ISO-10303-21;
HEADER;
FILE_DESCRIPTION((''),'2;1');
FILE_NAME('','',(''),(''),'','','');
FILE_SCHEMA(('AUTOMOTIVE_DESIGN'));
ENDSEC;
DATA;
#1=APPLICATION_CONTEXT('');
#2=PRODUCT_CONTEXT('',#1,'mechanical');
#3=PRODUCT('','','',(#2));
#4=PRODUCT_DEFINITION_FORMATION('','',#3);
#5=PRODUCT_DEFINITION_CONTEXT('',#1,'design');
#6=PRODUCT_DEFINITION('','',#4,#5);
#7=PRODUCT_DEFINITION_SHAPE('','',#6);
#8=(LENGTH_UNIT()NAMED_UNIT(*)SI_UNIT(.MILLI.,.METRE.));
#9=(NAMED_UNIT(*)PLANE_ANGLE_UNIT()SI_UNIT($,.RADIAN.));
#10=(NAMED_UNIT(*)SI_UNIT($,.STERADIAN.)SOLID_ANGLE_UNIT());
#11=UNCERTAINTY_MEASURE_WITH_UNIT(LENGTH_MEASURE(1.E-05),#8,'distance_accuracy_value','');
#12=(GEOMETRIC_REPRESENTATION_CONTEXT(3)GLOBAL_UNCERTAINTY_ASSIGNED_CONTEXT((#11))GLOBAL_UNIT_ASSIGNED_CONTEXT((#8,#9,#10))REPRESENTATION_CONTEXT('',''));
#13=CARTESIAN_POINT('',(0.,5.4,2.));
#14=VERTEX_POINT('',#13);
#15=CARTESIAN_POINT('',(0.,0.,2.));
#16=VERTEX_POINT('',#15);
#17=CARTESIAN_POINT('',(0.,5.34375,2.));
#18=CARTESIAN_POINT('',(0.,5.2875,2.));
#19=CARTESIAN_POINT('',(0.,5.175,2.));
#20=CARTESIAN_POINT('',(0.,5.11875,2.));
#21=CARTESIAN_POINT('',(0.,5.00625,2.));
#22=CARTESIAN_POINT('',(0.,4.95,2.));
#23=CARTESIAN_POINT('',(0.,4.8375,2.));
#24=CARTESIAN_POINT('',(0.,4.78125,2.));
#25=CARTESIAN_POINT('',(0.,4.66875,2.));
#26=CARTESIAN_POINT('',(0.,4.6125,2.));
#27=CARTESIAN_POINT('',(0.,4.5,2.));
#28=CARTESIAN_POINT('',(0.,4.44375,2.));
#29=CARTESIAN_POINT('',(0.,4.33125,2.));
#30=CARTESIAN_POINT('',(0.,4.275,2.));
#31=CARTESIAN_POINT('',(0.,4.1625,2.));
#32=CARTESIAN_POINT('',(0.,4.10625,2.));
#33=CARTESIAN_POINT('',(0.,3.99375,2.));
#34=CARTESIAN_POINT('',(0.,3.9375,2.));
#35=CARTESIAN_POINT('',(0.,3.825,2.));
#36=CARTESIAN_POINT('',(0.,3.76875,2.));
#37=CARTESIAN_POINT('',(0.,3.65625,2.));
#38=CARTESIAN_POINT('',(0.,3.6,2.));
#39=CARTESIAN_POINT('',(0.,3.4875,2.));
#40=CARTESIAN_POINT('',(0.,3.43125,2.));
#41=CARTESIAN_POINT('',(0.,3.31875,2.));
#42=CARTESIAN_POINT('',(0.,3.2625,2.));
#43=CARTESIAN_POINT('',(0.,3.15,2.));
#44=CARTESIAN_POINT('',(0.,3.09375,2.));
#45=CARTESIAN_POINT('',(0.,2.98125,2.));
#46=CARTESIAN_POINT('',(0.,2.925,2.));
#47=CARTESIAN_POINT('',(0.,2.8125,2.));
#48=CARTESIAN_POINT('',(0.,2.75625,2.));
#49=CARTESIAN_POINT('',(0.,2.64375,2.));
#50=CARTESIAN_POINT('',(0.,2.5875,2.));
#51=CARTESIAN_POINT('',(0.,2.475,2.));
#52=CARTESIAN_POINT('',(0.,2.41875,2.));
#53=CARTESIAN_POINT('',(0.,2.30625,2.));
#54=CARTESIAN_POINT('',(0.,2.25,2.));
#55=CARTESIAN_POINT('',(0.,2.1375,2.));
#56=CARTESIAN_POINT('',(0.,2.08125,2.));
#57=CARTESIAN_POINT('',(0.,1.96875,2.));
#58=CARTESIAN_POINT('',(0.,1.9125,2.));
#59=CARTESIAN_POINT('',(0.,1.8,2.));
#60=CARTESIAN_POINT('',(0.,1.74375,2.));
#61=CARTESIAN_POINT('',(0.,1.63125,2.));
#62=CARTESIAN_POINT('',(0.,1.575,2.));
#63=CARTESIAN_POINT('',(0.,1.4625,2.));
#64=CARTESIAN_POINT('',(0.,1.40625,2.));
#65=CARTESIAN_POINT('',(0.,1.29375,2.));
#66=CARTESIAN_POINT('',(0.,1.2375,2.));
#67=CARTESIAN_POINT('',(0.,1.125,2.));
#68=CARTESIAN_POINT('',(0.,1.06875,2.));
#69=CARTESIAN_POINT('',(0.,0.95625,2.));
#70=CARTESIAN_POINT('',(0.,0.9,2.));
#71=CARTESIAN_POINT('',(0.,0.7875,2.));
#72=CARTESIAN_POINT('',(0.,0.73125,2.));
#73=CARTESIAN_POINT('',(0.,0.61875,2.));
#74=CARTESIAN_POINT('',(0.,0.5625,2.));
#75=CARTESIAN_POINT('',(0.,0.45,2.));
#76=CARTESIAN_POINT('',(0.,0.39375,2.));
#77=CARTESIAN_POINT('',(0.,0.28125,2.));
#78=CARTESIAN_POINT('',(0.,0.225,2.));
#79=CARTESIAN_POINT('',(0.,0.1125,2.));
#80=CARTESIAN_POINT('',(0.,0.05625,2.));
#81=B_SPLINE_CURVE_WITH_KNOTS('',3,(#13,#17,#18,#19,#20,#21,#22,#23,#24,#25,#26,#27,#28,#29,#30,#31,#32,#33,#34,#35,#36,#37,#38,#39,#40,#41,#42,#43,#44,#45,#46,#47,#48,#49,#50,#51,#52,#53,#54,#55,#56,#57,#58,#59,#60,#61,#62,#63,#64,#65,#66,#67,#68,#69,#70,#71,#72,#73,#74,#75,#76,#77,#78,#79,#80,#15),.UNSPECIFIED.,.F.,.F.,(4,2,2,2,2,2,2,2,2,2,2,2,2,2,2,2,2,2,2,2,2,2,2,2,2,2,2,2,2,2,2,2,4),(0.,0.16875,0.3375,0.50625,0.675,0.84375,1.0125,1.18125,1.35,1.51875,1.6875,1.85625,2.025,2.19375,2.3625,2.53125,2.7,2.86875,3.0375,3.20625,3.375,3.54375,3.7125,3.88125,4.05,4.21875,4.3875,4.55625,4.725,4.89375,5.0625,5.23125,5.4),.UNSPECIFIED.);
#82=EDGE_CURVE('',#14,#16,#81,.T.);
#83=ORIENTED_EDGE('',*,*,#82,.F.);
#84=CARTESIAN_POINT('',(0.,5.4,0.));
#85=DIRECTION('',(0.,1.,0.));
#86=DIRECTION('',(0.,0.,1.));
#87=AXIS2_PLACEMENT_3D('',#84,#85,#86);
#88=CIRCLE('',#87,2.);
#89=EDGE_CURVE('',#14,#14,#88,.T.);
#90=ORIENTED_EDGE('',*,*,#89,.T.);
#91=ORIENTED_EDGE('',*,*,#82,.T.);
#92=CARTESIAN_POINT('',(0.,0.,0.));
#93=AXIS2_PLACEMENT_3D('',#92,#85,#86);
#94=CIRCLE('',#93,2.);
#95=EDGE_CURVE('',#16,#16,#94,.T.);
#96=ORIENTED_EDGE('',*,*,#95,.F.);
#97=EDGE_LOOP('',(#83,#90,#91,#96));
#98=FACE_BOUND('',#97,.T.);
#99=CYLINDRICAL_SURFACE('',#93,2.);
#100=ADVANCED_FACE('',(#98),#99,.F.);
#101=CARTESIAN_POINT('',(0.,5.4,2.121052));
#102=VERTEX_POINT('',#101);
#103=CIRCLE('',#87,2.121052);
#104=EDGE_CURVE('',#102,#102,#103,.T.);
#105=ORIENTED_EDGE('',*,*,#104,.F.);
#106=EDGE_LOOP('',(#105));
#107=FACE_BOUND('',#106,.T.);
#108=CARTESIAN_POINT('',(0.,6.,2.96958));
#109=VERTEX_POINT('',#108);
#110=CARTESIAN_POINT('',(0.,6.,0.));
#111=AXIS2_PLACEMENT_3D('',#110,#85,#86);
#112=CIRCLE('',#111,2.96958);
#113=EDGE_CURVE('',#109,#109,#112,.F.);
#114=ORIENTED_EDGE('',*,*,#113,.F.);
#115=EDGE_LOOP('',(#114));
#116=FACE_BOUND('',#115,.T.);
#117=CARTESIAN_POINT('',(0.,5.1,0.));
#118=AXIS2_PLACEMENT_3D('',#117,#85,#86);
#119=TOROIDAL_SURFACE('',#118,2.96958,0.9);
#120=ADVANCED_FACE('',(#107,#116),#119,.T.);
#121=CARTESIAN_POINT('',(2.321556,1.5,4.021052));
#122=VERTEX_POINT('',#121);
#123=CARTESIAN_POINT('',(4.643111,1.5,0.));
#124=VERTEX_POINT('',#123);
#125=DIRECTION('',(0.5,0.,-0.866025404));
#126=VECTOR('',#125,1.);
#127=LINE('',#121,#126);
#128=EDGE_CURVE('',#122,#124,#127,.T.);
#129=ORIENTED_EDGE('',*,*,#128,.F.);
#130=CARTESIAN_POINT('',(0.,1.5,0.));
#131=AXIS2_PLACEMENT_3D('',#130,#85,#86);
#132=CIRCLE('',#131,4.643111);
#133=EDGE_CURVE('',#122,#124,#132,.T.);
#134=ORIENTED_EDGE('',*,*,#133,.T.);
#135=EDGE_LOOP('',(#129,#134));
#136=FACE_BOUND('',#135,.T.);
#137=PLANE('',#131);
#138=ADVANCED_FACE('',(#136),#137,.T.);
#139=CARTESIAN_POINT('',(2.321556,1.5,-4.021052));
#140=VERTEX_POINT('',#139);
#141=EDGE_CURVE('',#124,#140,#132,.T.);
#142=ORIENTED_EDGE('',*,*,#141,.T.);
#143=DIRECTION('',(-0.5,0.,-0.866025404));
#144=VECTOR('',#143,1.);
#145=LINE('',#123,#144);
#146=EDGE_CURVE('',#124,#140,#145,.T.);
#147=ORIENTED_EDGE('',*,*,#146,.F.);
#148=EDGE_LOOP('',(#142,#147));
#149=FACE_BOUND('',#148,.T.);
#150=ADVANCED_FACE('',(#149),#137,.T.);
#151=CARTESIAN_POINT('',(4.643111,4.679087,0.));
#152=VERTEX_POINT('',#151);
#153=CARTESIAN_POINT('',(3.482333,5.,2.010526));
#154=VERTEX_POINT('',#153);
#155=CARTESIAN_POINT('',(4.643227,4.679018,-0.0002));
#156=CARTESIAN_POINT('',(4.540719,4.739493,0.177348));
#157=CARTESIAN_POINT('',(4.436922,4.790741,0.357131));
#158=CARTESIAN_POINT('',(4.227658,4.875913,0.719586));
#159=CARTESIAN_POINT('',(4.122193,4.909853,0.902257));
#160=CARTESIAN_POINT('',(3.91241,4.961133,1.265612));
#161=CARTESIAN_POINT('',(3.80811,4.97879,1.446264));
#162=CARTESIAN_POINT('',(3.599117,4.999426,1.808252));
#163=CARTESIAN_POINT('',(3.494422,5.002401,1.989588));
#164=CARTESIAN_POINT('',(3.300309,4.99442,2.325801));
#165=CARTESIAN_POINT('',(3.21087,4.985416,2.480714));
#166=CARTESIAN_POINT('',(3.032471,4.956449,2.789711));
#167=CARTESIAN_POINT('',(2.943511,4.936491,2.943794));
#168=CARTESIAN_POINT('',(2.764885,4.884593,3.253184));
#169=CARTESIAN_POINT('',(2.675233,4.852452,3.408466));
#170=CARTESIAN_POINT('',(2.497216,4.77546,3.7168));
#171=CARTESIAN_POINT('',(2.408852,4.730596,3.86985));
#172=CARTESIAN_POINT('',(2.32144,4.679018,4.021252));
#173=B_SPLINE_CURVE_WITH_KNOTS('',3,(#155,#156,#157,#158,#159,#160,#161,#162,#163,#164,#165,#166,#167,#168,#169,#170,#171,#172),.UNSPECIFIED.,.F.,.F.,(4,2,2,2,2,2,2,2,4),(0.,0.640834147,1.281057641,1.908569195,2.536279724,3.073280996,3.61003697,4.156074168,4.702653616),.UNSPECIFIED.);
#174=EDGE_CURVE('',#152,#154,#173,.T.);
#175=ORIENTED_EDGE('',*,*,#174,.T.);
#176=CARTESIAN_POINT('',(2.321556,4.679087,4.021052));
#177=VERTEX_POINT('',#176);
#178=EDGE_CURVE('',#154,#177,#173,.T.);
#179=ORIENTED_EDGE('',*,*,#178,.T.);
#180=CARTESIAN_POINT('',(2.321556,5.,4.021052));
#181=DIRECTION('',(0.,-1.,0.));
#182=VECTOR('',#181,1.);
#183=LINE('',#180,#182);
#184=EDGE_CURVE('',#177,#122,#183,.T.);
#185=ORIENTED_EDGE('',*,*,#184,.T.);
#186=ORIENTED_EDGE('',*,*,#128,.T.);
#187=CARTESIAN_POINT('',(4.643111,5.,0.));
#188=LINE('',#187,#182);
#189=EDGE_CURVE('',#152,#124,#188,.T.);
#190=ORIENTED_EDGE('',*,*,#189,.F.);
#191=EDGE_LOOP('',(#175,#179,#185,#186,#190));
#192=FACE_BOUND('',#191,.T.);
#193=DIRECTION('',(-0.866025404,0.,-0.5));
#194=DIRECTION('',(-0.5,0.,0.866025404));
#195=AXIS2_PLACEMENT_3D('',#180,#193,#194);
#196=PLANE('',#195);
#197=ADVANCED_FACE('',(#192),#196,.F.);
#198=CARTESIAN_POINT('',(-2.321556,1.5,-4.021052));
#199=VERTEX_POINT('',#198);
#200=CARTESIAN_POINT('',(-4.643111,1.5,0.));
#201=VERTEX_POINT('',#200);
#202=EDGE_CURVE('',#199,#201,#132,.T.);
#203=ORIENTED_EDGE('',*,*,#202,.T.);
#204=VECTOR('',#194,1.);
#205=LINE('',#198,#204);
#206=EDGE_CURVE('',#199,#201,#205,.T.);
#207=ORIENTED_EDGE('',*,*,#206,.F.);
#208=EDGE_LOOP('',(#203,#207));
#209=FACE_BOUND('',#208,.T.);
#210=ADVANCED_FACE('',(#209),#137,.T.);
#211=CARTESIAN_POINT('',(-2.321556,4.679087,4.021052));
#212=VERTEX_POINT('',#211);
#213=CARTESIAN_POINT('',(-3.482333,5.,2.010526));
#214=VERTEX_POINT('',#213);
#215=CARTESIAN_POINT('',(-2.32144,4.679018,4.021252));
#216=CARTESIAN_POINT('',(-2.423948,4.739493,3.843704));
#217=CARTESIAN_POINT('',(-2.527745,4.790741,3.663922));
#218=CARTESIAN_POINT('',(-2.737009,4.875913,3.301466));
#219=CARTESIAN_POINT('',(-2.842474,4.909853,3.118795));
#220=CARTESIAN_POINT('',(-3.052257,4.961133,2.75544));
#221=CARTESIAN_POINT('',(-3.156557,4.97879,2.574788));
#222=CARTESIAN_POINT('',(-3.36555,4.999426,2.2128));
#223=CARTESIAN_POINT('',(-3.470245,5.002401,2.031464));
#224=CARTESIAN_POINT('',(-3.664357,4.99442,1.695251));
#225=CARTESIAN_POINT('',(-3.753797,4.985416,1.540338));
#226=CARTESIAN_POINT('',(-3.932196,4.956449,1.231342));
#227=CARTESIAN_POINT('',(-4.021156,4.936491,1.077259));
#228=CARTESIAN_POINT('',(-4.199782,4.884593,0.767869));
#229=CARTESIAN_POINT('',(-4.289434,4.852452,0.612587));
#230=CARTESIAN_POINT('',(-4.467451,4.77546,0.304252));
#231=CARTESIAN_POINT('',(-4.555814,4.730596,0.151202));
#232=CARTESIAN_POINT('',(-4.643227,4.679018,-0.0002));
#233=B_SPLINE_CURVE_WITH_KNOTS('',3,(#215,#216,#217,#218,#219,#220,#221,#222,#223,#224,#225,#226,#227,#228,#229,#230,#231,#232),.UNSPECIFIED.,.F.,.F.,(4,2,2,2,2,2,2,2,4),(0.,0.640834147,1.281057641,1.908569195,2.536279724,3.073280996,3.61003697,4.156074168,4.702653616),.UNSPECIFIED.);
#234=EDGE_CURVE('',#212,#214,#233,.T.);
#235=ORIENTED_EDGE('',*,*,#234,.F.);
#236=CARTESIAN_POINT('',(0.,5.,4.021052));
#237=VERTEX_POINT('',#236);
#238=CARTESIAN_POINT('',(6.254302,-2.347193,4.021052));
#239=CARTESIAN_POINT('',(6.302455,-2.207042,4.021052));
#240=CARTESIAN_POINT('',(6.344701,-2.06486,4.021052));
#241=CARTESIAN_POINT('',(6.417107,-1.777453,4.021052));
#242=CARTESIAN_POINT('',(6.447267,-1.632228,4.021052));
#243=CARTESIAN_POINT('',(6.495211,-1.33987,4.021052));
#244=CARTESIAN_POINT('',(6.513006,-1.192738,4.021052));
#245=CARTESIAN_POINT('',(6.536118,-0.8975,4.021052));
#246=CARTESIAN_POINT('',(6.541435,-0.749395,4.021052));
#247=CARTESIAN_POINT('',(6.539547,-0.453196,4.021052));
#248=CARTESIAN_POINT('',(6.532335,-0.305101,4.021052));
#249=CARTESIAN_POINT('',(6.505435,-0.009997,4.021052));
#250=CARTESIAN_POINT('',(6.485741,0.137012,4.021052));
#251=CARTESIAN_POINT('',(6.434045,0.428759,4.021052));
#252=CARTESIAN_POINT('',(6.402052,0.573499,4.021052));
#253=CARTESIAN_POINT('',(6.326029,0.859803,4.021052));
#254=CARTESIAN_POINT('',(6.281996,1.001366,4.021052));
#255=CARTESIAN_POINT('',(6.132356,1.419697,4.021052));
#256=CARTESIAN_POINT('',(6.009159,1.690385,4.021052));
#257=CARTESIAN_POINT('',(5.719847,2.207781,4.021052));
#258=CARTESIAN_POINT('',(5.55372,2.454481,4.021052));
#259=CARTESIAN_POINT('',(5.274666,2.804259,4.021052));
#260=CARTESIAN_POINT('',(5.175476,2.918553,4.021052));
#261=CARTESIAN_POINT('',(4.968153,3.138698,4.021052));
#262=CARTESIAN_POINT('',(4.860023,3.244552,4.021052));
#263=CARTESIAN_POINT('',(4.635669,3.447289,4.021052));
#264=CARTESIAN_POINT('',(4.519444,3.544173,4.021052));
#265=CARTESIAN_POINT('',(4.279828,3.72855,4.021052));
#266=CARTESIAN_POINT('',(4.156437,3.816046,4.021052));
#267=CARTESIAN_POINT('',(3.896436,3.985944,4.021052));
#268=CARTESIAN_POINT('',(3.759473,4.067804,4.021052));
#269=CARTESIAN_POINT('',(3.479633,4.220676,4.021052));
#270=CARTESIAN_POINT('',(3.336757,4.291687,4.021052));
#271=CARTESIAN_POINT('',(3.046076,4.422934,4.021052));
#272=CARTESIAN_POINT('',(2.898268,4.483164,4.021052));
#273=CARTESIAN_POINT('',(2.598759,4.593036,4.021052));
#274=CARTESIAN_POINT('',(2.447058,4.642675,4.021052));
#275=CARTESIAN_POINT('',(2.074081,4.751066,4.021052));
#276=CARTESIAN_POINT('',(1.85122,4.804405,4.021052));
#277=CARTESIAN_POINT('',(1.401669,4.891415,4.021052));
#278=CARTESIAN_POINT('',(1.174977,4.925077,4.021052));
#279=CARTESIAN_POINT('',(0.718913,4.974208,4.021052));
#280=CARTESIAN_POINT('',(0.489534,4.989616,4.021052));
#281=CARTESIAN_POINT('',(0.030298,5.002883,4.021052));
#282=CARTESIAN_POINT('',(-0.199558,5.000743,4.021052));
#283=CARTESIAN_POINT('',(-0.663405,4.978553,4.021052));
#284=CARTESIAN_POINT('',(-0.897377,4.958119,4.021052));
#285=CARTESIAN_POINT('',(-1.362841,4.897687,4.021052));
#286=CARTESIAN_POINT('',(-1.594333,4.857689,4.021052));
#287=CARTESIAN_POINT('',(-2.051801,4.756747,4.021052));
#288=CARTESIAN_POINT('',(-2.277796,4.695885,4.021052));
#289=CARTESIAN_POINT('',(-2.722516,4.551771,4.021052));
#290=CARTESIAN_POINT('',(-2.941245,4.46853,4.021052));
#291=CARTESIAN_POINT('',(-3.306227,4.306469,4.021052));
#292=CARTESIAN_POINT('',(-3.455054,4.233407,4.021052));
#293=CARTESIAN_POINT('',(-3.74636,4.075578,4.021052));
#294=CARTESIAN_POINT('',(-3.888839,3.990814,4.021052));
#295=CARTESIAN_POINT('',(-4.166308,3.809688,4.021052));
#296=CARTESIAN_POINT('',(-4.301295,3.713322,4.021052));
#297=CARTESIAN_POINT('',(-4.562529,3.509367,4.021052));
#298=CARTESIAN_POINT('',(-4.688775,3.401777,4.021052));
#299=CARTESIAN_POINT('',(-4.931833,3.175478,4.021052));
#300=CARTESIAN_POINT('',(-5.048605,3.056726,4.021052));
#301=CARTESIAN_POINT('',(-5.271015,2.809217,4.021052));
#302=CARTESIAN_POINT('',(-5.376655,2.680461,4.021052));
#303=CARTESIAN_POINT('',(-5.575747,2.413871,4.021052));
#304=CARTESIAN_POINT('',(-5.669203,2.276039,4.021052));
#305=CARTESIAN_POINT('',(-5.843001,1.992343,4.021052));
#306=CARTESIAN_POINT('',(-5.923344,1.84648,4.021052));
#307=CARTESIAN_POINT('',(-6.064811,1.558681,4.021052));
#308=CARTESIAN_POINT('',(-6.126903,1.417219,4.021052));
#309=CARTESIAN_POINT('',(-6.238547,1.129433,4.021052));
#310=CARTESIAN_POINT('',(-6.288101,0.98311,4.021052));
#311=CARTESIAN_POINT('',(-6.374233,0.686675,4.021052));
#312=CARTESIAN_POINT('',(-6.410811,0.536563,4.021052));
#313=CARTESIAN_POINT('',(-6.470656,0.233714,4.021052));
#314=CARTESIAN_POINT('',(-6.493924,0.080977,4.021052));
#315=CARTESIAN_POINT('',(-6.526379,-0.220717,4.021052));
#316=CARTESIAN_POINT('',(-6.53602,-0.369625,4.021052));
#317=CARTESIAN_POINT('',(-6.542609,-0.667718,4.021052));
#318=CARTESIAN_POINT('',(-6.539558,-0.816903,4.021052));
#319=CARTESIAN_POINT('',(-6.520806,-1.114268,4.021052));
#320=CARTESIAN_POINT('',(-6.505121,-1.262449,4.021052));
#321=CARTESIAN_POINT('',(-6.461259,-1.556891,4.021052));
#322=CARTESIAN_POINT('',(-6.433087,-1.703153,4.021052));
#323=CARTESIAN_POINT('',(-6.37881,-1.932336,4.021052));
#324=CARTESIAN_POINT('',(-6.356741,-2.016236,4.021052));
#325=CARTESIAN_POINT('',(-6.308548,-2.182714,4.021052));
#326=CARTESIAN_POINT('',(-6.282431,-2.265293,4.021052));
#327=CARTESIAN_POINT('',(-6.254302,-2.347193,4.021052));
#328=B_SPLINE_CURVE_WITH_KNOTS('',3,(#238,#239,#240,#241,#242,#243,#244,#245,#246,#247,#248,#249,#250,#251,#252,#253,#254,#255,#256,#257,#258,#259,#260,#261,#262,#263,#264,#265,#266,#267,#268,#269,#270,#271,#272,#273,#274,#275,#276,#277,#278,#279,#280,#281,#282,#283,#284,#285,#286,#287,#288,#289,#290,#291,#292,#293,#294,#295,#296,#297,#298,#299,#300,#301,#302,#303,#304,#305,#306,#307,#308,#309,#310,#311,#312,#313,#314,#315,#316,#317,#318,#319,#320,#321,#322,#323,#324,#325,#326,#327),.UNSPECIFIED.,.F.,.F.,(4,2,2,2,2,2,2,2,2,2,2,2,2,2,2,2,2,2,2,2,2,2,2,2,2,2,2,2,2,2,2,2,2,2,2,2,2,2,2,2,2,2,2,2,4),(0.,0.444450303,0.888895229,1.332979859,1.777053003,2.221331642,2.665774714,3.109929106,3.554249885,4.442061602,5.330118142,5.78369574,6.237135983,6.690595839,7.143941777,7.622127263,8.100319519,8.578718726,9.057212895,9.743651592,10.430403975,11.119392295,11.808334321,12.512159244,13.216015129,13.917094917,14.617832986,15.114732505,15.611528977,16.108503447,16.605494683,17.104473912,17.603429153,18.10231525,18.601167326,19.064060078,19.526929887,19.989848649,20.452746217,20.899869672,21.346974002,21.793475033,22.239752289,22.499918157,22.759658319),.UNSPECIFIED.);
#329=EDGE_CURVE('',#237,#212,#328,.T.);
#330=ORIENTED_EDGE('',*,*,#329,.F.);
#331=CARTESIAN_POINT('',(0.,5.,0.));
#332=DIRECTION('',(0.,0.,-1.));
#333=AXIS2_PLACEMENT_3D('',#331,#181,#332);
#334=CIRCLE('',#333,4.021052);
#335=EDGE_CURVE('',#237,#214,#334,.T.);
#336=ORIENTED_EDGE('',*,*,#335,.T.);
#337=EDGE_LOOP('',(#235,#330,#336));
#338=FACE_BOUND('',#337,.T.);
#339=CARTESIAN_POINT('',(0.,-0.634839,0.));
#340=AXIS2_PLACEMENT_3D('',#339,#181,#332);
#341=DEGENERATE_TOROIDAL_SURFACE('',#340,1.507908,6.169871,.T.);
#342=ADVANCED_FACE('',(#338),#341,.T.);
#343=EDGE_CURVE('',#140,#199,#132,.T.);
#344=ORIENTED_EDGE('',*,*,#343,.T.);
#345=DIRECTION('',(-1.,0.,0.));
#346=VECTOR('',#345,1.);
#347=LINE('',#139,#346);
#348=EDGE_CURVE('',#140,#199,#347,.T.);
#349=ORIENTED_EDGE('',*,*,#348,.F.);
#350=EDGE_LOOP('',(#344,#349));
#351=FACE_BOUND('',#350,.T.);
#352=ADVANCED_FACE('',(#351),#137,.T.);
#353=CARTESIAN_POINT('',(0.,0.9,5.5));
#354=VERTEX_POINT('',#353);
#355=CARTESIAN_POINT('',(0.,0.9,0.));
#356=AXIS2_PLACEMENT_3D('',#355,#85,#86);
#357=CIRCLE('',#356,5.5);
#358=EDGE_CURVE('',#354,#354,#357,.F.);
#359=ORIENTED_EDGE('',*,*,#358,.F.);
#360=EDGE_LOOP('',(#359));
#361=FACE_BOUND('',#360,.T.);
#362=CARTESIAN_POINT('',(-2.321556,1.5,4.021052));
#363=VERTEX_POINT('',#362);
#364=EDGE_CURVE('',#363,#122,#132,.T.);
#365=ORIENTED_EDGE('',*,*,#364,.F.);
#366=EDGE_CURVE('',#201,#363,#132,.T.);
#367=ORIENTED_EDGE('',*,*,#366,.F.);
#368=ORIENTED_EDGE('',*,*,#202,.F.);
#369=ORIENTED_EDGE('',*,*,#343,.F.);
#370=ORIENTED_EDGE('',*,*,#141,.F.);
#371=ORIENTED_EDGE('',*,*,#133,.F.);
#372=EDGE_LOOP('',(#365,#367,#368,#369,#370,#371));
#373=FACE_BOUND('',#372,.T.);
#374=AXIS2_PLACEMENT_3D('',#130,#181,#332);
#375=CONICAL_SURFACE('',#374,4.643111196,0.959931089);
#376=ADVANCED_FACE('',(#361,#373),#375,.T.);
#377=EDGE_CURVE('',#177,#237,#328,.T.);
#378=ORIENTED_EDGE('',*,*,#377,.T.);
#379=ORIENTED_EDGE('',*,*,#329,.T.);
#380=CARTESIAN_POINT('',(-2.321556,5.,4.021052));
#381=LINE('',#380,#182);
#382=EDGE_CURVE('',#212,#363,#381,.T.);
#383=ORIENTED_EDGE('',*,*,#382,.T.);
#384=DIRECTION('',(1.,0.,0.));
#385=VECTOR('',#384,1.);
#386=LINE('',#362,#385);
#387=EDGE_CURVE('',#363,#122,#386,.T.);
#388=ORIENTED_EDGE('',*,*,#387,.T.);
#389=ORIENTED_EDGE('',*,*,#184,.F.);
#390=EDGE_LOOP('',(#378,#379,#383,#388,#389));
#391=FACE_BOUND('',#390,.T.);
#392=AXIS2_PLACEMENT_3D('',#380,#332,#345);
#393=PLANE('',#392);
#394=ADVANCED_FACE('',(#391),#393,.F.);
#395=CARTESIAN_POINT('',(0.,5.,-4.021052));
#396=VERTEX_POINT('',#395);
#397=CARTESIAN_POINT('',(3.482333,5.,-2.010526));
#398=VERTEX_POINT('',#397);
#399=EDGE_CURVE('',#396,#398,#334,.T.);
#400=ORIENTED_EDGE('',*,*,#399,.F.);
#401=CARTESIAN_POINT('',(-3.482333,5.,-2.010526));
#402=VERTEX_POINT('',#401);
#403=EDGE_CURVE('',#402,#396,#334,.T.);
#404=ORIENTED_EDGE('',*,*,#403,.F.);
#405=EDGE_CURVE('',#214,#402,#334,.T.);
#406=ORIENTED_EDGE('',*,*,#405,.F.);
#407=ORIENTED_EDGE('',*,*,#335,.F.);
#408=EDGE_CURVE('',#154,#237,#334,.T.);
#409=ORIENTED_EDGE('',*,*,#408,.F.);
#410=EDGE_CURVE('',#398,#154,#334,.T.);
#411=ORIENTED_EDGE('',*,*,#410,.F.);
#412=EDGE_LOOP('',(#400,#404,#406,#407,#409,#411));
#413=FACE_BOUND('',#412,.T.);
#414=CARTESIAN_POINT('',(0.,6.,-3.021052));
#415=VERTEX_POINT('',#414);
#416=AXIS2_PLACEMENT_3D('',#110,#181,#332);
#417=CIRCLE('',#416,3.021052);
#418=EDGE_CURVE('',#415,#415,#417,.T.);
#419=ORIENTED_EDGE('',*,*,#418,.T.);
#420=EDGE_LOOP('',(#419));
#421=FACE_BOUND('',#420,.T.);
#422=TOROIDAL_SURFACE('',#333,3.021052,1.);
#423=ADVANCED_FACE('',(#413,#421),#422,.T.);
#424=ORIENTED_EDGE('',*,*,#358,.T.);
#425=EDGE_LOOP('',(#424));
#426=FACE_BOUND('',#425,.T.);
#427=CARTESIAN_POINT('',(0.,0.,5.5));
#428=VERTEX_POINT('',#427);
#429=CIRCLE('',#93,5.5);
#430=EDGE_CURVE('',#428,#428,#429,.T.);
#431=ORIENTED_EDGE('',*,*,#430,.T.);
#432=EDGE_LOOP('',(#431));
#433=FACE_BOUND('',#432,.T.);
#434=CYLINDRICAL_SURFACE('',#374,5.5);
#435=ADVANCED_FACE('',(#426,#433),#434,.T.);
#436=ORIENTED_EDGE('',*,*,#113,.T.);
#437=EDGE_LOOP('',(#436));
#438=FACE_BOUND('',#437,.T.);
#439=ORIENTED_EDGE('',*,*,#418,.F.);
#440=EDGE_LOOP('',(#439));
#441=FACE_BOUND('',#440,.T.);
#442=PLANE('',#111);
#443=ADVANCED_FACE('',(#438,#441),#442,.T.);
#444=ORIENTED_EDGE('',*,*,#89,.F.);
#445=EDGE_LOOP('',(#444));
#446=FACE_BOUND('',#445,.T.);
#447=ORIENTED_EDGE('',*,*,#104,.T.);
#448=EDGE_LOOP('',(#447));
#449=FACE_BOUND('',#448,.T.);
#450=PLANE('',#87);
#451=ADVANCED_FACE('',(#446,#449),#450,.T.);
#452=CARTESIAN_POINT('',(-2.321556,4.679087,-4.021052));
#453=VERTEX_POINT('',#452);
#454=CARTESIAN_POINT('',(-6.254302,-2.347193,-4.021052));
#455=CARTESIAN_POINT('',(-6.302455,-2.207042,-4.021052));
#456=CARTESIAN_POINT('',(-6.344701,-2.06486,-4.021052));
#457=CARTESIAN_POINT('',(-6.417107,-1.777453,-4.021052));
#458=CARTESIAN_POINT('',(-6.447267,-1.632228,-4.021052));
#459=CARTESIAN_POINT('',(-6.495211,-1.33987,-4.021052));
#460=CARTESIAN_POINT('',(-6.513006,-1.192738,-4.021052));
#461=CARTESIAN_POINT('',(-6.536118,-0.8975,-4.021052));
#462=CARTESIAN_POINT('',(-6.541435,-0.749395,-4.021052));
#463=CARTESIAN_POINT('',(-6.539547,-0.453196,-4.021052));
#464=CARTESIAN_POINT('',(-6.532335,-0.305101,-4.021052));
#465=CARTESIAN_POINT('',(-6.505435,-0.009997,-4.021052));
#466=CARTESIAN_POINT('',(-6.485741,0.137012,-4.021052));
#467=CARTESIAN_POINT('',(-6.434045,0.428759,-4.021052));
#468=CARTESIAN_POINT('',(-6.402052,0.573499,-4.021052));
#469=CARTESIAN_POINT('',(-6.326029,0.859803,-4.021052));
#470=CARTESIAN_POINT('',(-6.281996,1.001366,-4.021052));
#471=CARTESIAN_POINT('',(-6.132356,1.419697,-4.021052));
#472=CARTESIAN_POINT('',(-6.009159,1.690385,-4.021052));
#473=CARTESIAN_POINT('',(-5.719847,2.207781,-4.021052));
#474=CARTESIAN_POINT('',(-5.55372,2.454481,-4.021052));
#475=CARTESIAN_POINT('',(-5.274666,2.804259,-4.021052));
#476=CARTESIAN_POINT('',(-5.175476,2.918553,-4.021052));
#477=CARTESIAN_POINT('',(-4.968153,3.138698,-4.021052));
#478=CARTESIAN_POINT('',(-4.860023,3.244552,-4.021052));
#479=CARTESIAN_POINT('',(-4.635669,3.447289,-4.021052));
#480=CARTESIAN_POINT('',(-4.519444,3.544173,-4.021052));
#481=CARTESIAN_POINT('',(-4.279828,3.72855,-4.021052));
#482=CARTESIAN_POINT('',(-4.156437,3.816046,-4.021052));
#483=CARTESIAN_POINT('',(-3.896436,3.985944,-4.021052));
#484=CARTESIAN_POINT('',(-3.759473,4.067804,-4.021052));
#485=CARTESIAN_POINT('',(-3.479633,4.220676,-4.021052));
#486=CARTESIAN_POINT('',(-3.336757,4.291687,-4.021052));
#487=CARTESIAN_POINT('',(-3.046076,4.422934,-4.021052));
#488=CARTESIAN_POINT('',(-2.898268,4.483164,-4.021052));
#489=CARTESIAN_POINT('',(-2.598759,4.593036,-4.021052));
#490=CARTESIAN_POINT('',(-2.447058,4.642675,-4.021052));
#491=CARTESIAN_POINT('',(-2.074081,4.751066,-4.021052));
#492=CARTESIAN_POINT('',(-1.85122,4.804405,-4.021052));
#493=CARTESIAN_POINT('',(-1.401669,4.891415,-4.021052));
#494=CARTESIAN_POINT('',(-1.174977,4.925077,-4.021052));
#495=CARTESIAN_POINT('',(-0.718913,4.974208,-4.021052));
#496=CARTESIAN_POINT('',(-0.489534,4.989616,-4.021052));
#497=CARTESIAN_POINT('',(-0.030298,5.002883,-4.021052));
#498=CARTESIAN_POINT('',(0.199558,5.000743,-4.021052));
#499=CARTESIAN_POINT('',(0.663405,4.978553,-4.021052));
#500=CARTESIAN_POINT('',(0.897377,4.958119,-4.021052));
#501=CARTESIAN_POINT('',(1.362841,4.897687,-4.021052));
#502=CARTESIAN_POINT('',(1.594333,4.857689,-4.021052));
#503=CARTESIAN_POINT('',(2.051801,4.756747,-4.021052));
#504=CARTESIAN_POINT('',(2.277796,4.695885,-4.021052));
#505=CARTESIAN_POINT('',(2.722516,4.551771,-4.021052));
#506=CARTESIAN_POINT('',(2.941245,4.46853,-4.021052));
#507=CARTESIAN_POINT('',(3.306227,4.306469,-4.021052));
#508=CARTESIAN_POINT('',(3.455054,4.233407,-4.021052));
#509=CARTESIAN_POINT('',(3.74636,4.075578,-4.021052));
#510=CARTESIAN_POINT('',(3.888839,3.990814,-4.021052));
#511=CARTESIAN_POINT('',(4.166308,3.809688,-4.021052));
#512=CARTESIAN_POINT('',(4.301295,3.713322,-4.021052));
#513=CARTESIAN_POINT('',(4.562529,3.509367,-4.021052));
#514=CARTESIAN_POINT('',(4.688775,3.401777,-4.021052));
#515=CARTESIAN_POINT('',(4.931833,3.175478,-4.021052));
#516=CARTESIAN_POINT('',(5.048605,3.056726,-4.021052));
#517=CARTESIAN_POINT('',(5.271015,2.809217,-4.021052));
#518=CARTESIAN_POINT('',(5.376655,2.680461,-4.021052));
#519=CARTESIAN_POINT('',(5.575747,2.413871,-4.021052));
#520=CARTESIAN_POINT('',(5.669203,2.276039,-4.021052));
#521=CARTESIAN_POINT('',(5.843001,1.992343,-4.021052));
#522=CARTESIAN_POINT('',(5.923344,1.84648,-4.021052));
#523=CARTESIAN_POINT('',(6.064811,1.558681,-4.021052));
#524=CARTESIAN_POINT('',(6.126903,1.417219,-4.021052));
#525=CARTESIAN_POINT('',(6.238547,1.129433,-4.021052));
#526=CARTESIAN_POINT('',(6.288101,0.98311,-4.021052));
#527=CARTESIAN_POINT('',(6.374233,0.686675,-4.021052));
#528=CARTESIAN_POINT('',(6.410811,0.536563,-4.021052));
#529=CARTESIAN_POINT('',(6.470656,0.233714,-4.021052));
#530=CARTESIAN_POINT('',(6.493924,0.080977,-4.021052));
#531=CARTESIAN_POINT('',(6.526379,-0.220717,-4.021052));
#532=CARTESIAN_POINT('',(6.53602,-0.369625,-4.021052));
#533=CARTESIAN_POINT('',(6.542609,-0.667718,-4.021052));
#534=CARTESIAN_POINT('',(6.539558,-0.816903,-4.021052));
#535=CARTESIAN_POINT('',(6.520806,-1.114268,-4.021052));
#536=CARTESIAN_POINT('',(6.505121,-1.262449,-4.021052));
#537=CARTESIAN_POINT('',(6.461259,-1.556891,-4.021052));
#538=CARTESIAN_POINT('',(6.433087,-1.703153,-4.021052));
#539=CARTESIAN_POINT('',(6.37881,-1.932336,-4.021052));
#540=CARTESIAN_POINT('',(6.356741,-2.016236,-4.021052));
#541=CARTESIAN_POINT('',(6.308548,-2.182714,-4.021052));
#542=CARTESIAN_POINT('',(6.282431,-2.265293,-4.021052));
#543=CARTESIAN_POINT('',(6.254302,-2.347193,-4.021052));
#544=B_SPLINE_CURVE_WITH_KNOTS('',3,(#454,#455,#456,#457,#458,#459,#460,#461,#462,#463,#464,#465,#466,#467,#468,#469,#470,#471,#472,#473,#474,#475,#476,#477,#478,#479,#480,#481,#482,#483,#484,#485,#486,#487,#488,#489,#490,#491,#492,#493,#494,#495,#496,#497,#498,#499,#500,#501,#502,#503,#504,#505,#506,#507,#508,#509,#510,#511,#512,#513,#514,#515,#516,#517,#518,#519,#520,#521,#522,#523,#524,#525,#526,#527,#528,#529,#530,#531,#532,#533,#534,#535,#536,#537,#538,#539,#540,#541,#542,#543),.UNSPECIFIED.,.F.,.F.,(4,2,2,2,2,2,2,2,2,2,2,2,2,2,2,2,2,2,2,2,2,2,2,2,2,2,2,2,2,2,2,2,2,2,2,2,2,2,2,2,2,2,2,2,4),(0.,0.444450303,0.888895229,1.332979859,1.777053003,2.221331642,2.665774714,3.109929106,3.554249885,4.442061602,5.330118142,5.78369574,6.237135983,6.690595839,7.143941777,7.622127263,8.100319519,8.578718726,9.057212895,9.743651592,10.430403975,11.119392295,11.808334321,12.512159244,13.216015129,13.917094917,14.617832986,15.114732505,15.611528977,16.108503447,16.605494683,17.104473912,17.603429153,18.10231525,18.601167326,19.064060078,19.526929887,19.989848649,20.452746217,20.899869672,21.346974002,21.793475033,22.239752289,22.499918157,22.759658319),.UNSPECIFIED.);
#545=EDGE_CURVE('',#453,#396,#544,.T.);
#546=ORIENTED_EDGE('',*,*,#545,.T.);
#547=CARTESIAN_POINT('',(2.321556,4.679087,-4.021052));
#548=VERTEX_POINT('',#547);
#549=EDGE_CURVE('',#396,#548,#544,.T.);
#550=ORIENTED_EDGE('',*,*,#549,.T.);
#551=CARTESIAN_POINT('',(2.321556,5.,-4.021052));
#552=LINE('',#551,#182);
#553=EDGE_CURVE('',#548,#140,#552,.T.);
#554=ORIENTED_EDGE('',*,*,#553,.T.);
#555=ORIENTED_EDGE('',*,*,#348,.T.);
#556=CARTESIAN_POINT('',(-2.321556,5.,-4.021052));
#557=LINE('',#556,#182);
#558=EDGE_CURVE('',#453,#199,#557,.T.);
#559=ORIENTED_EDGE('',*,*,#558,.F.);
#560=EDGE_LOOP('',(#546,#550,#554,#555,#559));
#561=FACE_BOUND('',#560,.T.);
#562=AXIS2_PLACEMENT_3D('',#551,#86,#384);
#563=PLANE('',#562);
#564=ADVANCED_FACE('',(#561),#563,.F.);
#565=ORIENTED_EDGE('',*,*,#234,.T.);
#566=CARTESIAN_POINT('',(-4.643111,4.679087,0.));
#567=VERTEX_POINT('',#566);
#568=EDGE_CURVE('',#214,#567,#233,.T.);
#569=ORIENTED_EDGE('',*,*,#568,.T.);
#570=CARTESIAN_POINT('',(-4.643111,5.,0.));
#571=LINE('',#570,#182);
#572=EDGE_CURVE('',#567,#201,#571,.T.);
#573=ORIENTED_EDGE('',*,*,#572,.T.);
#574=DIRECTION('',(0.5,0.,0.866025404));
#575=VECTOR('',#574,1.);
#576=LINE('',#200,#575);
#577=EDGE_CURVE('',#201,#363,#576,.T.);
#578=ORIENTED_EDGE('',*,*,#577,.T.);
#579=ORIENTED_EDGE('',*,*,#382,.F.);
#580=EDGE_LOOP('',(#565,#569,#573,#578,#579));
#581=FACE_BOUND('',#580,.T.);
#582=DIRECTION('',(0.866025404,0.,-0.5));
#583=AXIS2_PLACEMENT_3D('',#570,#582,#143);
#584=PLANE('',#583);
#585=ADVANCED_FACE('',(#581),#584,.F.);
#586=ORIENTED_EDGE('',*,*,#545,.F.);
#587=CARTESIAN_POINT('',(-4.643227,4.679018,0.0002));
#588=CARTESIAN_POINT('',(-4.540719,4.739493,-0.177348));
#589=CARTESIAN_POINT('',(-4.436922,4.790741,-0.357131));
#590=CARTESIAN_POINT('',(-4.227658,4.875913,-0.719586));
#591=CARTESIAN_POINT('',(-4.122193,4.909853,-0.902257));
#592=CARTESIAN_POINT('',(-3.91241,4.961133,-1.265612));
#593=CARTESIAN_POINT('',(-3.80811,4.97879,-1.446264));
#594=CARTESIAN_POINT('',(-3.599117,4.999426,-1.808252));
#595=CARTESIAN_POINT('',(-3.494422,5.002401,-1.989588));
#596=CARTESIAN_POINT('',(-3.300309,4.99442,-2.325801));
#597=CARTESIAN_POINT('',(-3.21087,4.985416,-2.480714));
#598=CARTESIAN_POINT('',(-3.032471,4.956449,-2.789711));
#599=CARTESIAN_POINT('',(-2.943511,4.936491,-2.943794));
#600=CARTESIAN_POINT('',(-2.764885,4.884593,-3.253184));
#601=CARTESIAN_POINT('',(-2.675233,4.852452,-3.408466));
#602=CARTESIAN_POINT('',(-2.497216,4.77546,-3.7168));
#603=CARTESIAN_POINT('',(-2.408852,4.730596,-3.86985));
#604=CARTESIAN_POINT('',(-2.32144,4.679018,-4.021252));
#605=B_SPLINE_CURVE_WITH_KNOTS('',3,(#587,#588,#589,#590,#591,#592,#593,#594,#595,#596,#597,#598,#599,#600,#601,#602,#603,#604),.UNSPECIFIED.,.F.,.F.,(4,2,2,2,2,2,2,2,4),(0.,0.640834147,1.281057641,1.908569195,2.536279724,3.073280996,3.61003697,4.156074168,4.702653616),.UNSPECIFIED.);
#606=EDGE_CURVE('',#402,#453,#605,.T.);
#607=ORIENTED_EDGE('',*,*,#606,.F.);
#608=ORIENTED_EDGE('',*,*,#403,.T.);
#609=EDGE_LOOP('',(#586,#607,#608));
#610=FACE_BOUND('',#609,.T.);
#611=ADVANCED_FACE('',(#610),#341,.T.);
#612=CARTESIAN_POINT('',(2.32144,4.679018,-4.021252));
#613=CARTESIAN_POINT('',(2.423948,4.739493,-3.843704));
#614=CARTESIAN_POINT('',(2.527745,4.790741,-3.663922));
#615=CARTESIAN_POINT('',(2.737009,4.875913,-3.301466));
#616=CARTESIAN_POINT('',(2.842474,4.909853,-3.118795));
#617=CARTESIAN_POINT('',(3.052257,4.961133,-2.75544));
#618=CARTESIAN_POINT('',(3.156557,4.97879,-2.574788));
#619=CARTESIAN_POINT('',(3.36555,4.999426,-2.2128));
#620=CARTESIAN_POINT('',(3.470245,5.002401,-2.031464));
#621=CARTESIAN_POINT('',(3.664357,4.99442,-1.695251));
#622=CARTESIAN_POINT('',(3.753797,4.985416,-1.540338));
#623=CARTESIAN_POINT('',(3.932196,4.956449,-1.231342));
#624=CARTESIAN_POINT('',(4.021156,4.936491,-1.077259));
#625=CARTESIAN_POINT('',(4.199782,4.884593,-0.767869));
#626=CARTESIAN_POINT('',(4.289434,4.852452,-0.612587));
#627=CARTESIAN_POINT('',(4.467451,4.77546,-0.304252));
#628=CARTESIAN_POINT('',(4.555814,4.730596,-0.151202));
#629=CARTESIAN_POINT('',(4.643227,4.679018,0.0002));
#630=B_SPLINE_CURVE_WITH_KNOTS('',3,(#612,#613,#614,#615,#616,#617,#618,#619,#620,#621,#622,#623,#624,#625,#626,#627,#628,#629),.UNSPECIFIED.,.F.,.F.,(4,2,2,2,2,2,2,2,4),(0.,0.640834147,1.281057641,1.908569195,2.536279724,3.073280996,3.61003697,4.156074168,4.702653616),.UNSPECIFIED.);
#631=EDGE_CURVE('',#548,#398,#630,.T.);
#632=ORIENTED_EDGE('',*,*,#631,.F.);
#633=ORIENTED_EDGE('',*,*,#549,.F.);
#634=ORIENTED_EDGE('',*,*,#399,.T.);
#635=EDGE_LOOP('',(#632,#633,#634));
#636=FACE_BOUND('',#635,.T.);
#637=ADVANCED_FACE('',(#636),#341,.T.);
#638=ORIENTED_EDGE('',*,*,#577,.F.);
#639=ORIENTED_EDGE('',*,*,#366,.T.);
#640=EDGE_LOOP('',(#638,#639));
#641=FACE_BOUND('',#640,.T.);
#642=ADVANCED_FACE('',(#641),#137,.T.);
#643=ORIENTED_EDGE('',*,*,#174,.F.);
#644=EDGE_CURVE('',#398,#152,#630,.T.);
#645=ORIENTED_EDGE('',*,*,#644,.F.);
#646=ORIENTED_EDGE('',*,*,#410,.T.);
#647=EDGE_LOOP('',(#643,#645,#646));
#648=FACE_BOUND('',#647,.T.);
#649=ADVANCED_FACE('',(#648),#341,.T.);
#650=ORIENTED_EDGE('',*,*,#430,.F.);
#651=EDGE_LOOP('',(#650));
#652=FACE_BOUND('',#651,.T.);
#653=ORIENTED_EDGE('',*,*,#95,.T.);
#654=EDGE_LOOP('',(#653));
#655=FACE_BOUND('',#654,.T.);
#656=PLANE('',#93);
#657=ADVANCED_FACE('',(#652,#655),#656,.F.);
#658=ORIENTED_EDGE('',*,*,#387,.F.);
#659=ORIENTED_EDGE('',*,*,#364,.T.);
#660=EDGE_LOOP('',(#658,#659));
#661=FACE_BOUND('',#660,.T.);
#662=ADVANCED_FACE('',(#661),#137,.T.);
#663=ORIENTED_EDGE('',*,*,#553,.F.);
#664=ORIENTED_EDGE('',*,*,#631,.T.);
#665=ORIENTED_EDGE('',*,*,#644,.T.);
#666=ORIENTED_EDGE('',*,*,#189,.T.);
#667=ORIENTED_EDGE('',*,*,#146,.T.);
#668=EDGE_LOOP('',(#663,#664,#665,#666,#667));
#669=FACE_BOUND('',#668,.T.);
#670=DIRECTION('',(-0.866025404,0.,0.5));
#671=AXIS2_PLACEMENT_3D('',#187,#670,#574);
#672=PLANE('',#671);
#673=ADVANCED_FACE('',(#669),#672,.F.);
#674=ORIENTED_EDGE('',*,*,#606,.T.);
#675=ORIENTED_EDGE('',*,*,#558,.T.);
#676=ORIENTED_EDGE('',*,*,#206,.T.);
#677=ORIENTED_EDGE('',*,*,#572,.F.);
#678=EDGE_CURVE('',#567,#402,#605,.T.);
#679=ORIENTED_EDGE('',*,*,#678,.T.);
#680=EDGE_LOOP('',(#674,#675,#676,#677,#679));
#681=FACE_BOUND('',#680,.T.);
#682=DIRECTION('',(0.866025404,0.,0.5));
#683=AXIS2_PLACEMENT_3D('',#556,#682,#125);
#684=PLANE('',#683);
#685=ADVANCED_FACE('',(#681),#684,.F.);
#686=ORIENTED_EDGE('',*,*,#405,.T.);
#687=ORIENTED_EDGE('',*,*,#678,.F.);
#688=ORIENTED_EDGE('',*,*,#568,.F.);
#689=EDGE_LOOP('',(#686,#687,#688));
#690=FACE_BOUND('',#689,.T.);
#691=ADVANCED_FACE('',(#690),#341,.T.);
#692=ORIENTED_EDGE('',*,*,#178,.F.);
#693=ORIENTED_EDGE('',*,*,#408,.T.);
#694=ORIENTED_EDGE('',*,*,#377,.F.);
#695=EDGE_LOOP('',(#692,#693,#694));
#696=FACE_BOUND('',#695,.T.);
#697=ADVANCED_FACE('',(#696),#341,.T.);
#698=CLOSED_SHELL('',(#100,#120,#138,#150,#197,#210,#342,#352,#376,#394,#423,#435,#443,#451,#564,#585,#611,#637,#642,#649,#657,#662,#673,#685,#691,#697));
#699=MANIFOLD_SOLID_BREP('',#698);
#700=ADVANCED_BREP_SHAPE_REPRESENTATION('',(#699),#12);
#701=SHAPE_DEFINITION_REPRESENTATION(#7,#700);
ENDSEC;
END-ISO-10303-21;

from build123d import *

# Parameters (mm, degrees)
SKETCH1_R               = 5.5
BOSS_EXTRUDE1_DEPTH     = 1.5
CHAMFER1_SIZE           = 0.6
CHAMFER1_SIZE2          = 0.856888804
BOSS_EXTRUDE2_DEPTH     = 3.5
SKETCH3_R               = 4.021052248
BOSS_EXTRUDE3_DEPTH     = 1
SKETCH5_R               = 2.121052248
CUT_EXTRUDE1_DEPTH      = 0.6
FILLET1_R               = 0.9
CUT_EXTRUDE2_DEPTH      = 10.468896451
CUT_EXTRUDE2_DEPTH_BACK = 10.468896451
SKETCH6_R               = 2


with BuildPart() as part:
    # Sketch1 → Boss-Extrude1 (new body)
    with BuildSketch(Plane(origin=(0, 0, 0), x_dir=(1, 0, 0), z_dir=(0, 1, 0))):
        with Locations(Location((0, 0, 0), (0, 0, 270))):
            Circle(SKETCH1_R)
    extrude(amount=BOSS_EXTRUDE1_DEPTH)

    # Chamfer1
    chamfer1_edges = [part.edges().sort_by_distance(p)[0] for p in [
        (0, 1.5, -5.5),
    ]]
    chamfer1_side = [part.faces().sort_by_distance(p)[0] for p in [
        (0, 0.75, -5.5),
    ]]
    chamfer(chamfer1_edges, length=CHAMFER1_SIZE, length2=CHAMFER1_SIZE2, reference=chamfer1_side[0])

    # Sketch2 → Boss-Extrude2 (add)
    with BuildSketch(Plane(origin=(0, 1.5, 0), x_dir=(1, 0, 0), z_dir=(0, 1, 0))):
        Polygon((4.643111196, 0), (2.321555598, 4.021052248), (-2.321555598, 4.021052248), (-4.643111196, 0), (-2.321555598, -4.021052248), (2.321555598, -4.021052248), align=None)
    extrude(amount=BOSS_EXTRUDE2_DEPTH)

    # Sketch3 → Boss-Extrude3 (add)
    with BuildSketch(Plane(origin=(0, 5, 0), x_dir=(1, 0, 0), z_dir=(0, 1, 0))):
        with Locations(Location((0, 0, 0), (0, 0, 270))):
            Circle(SKETCH3_R)
    extrude(amount=BOSS_EXTRUDE3_DEPTH)

    # Sketch4 → Cut-Revolve1 (revolve, cut)
    with BuildSketch(Plane.XY, mode=Mode.PRIVATE) as cut_revolve1_sk:
        with BuildLine():
            Line((6.63749378, 2.793667141), (6.63749378, 7.491604904))
            Line((6.63749378, 7.491604904), (3.021052248, 7.491604904))
            Line((3.021052248, 7.491604904), (3.021052248, 6))
            ThreePointArc((3.021052248, 6), (3.728159029, 5.707106781), (4.021052248, 5))
            ThreePointArc((4.021052248, 5), (5.485320065, 4.081886331), (6.63749378, 2.793667141))
        make_face()
    revolve(cut_revolve1_sk.sketch.rotate(Axis((0, 6, 0), (0, 1, 0)), 60), axis=Axis((0, 6, 0), (0, 1, 0)), mode=Mode.SUBTRACT)

    # Sketch5 → Cut-Extrude1 (cut)
    with BuildSketch(Plane(origin=(0, 6, 0), x_dir=(1, 0, 0), z_dir=(0, 1, 0))):
        with Locations(Location((0, 0, 0), (0, 0, 270))):
            Circle(SKETCH5_R)
    extrude(amount=-CUT_EXTRUDE1_DEPTH, mode=Mode.SUBTRACT)

    # Fillet1
    # the kernel refuses this fillet: 0.9 mm, written as the material it takes off along each edge
    with BuildSketch(Plane(origin=(0, 6, 0), x_dir=(0, 0, 1), z_dir=(-1, 0, 0))) as fillet1_piece_1:
        with BuildLine():
            CenterArc((2.969580386, -0.9), FILLET1_R, 90, 70.528779366)
            Line((2.121052248, -0.6), (2.104081686, -0.594))
            ThreePointArc((2.104081686, -0.594), (2.103052248, -0.3), (2.103052248, 0))
            Line((2.103052248, 0), (2.121052248, 0.018))
            Line((2.121052248, 0.018), (2.969580386, 0.018))
            Line((2.969580386, 0.018), (2.969580386, 0))
        make_face()
    revolve(axis=Axis((0, 6, 0), (0, 1, 0)), mode=Mode.SUBTRACT)

    # Sketch6 → Cut-Extrude2 (cut, two sides: drawn at the far end of the back side and taken through both)
    with BuildSketch(Plane(origin=(0, 5.4, 0), x_dir=(1, 0, 0), z_dir=(0, 1, 0)).offset(-CUT_EXTRUDE2_DEPTH_BACK)):
        with Locations(Location((0, 0, 0), (0, 0, 270))):
            Circle(SKETCH6_R)
    extrude(amount=CUT_EXTRUDE2_DEPTH + CUT_EXTRUDE2_DEPTH_BACK, mode=Mode.SUBTRACT)


solid = part.part
